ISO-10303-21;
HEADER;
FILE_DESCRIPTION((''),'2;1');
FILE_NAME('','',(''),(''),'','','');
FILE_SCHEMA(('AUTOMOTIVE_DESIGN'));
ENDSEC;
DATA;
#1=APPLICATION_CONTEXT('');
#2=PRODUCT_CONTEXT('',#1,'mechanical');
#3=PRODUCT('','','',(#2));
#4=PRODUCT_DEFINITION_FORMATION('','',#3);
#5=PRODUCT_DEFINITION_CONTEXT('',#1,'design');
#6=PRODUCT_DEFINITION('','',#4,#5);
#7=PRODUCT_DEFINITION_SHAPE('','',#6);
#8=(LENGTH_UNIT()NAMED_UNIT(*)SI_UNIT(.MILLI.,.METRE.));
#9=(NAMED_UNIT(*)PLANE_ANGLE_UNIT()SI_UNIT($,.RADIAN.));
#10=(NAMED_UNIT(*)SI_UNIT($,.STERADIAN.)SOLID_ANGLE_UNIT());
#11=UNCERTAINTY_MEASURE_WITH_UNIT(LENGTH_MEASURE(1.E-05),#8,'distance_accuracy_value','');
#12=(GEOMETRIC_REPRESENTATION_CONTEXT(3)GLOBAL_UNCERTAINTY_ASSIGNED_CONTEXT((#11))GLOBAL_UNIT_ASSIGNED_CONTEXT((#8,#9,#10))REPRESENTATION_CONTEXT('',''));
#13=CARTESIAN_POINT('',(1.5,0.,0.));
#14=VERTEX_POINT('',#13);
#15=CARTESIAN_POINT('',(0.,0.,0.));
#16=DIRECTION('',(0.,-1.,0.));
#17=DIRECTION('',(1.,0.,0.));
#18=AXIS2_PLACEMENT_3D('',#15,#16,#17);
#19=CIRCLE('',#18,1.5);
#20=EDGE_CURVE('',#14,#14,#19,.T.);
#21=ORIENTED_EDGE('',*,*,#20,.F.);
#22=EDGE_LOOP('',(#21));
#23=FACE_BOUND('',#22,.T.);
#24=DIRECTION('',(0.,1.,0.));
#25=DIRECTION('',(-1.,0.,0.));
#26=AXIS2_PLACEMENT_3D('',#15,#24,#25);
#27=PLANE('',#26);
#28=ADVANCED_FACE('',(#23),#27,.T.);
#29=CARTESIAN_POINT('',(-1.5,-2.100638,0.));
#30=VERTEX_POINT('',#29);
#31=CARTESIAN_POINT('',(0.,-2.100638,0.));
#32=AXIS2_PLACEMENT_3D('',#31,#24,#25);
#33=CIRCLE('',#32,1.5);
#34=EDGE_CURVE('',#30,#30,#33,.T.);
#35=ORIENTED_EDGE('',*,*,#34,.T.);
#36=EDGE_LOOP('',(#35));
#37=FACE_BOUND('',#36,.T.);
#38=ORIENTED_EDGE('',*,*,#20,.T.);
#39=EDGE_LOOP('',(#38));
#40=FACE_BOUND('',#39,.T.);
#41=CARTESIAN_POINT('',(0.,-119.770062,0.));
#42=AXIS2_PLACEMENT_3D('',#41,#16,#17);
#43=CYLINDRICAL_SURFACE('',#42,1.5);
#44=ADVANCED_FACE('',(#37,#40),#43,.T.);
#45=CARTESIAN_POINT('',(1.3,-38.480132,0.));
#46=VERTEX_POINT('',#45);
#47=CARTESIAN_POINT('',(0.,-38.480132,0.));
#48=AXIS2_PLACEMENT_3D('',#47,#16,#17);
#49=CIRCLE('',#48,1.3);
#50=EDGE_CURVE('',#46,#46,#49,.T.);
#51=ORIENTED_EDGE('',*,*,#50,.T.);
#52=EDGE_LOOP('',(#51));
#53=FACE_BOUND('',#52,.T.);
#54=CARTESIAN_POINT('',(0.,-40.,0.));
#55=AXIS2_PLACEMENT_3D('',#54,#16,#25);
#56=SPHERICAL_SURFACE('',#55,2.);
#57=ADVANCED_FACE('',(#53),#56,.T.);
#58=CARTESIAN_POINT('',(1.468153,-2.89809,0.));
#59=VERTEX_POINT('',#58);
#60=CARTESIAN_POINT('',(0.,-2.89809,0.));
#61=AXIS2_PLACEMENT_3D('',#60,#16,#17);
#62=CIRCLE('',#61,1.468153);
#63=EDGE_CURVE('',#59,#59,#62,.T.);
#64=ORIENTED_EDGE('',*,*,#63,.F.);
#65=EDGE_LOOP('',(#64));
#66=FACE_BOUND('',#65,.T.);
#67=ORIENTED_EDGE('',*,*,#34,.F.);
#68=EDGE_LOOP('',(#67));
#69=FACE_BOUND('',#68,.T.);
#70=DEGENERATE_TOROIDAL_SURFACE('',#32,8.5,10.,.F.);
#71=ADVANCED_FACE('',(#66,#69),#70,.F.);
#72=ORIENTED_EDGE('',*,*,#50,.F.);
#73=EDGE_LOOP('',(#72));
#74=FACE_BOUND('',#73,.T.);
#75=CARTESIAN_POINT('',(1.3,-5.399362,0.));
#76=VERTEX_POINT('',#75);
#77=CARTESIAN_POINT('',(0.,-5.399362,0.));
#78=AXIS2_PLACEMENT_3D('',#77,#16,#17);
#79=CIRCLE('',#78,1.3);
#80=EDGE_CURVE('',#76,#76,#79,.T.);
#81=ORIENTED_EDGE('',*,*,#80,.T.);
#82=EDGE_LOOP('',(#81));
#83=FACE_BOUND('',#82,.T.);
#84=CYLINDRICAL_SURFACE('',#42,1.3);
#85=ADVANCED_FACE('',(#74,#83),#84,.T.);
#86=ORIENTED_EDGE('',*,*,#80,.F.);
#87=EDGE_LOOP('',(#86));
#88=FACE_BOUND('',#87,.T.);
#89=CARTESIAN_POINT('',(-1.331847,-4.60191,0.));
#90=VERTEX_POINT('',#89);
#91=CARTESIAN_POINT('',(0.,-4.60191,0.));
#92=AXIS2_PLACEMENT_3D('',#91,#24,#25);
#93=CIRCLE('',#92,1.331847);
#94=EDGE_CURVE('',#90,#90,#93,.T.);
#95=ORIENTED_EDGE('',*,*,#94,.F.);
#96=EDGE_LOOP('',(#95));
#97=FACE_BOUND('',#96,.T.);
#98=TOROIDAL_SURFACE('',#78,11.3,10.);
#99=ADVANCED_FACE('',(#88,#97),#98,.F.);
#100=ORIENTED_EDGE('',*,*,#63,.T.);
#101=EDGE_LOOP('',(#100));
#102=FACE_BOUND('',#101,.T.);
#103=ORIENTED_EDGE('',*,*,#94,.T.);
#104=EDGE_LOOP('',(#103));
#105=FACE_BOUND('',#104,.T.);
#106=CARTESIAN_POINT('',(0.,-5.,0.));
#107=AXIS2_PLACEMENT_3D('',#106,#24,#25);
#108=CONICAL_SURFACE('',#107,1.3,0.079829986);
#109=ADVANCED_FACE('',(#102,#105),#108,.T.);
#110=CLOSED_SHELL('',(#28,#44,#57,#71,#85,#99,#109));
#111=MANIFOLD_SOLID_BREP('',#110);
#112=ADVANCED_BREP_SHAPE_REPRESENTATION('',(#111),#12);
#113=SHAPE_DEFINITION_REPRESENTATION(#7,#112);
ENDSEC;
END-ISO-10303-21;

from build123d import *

# Parameters (mm, degrees)
FILLET1_R = 10


with BuildPart() as part:
    # Sketch1 → Revolve1 (revolve)
    with BuildSketch(Plane.XY):
        with BuildLine():
            Line((0, 0), (1.5, 0))
            Line((1.5, 0), (1.5, -2.5))
            Line((1.5, -2.5), (1.3, -5))
            Line((1.3, -5), (1.3, -38.480131585))
            ThreePointArc((1.3, -38.480131585), (1.876131236, -40.69291528), (0, -42))
            Line((0, -42), (0, 0))
        make_face()
    revolve(axis=Axis((0, -119.770062165, 0), (0, 1, 0)))

    # Fillet1
    # the kernel refuses this fillet: 10 mm, written as the material it adds along each edge
    with BuildSketch(Plane(origin=(0, -5, 0), x_dir=(1, 0, 0), z_dir=(0, 0, 1))) as fillet1_piece_1:
        with BuildLine():
            CenterArc((1.3 + FILLET1_R, -FILLET1_R * 0.0399362039845), FILLET1_R, 175.42607874, 4.57392126)
            Line((1.3, -FILLET1_R * 0.0399362039845), (1.3, 0))
            Line((1.3, 0), (1.3 + FILLET1_R * 0.00318472146388, FILLET1_R * 0.0398090182984))
        make_face()
    revolve(axis=Axis((0, -5, 0), (0, 1, 0)))
    # the kernel refuses this fillet: 10 mm, written as the material it takes off along each edge
    with BuildSketch(Plane(origin=(0, -2.5, 0), x_dir=(1, 0, 0), z_dir=(0, 0, 1))) as fillet1_2_piece_1:
        with BuildLine():
            CenterArc((1.5 - FILLET1_R, FILLET1_R * 0.0399362039845), FILLET1_R, 355.42607874, 4.57392126)
            Line((1.5 - FILLET1_R * 0.00318472146387, -FILLET1_R * 0.0398090182984), (1.5, 0))
            Line((1.5, 0), (1.5, FILLET1_R * 0.0399362039845))
        make_face()
    revolve(axis=Axis((0, -2.5, 0), (0, 1, 0)), mode=Mode.SUBTRACT)


solid = part.part
